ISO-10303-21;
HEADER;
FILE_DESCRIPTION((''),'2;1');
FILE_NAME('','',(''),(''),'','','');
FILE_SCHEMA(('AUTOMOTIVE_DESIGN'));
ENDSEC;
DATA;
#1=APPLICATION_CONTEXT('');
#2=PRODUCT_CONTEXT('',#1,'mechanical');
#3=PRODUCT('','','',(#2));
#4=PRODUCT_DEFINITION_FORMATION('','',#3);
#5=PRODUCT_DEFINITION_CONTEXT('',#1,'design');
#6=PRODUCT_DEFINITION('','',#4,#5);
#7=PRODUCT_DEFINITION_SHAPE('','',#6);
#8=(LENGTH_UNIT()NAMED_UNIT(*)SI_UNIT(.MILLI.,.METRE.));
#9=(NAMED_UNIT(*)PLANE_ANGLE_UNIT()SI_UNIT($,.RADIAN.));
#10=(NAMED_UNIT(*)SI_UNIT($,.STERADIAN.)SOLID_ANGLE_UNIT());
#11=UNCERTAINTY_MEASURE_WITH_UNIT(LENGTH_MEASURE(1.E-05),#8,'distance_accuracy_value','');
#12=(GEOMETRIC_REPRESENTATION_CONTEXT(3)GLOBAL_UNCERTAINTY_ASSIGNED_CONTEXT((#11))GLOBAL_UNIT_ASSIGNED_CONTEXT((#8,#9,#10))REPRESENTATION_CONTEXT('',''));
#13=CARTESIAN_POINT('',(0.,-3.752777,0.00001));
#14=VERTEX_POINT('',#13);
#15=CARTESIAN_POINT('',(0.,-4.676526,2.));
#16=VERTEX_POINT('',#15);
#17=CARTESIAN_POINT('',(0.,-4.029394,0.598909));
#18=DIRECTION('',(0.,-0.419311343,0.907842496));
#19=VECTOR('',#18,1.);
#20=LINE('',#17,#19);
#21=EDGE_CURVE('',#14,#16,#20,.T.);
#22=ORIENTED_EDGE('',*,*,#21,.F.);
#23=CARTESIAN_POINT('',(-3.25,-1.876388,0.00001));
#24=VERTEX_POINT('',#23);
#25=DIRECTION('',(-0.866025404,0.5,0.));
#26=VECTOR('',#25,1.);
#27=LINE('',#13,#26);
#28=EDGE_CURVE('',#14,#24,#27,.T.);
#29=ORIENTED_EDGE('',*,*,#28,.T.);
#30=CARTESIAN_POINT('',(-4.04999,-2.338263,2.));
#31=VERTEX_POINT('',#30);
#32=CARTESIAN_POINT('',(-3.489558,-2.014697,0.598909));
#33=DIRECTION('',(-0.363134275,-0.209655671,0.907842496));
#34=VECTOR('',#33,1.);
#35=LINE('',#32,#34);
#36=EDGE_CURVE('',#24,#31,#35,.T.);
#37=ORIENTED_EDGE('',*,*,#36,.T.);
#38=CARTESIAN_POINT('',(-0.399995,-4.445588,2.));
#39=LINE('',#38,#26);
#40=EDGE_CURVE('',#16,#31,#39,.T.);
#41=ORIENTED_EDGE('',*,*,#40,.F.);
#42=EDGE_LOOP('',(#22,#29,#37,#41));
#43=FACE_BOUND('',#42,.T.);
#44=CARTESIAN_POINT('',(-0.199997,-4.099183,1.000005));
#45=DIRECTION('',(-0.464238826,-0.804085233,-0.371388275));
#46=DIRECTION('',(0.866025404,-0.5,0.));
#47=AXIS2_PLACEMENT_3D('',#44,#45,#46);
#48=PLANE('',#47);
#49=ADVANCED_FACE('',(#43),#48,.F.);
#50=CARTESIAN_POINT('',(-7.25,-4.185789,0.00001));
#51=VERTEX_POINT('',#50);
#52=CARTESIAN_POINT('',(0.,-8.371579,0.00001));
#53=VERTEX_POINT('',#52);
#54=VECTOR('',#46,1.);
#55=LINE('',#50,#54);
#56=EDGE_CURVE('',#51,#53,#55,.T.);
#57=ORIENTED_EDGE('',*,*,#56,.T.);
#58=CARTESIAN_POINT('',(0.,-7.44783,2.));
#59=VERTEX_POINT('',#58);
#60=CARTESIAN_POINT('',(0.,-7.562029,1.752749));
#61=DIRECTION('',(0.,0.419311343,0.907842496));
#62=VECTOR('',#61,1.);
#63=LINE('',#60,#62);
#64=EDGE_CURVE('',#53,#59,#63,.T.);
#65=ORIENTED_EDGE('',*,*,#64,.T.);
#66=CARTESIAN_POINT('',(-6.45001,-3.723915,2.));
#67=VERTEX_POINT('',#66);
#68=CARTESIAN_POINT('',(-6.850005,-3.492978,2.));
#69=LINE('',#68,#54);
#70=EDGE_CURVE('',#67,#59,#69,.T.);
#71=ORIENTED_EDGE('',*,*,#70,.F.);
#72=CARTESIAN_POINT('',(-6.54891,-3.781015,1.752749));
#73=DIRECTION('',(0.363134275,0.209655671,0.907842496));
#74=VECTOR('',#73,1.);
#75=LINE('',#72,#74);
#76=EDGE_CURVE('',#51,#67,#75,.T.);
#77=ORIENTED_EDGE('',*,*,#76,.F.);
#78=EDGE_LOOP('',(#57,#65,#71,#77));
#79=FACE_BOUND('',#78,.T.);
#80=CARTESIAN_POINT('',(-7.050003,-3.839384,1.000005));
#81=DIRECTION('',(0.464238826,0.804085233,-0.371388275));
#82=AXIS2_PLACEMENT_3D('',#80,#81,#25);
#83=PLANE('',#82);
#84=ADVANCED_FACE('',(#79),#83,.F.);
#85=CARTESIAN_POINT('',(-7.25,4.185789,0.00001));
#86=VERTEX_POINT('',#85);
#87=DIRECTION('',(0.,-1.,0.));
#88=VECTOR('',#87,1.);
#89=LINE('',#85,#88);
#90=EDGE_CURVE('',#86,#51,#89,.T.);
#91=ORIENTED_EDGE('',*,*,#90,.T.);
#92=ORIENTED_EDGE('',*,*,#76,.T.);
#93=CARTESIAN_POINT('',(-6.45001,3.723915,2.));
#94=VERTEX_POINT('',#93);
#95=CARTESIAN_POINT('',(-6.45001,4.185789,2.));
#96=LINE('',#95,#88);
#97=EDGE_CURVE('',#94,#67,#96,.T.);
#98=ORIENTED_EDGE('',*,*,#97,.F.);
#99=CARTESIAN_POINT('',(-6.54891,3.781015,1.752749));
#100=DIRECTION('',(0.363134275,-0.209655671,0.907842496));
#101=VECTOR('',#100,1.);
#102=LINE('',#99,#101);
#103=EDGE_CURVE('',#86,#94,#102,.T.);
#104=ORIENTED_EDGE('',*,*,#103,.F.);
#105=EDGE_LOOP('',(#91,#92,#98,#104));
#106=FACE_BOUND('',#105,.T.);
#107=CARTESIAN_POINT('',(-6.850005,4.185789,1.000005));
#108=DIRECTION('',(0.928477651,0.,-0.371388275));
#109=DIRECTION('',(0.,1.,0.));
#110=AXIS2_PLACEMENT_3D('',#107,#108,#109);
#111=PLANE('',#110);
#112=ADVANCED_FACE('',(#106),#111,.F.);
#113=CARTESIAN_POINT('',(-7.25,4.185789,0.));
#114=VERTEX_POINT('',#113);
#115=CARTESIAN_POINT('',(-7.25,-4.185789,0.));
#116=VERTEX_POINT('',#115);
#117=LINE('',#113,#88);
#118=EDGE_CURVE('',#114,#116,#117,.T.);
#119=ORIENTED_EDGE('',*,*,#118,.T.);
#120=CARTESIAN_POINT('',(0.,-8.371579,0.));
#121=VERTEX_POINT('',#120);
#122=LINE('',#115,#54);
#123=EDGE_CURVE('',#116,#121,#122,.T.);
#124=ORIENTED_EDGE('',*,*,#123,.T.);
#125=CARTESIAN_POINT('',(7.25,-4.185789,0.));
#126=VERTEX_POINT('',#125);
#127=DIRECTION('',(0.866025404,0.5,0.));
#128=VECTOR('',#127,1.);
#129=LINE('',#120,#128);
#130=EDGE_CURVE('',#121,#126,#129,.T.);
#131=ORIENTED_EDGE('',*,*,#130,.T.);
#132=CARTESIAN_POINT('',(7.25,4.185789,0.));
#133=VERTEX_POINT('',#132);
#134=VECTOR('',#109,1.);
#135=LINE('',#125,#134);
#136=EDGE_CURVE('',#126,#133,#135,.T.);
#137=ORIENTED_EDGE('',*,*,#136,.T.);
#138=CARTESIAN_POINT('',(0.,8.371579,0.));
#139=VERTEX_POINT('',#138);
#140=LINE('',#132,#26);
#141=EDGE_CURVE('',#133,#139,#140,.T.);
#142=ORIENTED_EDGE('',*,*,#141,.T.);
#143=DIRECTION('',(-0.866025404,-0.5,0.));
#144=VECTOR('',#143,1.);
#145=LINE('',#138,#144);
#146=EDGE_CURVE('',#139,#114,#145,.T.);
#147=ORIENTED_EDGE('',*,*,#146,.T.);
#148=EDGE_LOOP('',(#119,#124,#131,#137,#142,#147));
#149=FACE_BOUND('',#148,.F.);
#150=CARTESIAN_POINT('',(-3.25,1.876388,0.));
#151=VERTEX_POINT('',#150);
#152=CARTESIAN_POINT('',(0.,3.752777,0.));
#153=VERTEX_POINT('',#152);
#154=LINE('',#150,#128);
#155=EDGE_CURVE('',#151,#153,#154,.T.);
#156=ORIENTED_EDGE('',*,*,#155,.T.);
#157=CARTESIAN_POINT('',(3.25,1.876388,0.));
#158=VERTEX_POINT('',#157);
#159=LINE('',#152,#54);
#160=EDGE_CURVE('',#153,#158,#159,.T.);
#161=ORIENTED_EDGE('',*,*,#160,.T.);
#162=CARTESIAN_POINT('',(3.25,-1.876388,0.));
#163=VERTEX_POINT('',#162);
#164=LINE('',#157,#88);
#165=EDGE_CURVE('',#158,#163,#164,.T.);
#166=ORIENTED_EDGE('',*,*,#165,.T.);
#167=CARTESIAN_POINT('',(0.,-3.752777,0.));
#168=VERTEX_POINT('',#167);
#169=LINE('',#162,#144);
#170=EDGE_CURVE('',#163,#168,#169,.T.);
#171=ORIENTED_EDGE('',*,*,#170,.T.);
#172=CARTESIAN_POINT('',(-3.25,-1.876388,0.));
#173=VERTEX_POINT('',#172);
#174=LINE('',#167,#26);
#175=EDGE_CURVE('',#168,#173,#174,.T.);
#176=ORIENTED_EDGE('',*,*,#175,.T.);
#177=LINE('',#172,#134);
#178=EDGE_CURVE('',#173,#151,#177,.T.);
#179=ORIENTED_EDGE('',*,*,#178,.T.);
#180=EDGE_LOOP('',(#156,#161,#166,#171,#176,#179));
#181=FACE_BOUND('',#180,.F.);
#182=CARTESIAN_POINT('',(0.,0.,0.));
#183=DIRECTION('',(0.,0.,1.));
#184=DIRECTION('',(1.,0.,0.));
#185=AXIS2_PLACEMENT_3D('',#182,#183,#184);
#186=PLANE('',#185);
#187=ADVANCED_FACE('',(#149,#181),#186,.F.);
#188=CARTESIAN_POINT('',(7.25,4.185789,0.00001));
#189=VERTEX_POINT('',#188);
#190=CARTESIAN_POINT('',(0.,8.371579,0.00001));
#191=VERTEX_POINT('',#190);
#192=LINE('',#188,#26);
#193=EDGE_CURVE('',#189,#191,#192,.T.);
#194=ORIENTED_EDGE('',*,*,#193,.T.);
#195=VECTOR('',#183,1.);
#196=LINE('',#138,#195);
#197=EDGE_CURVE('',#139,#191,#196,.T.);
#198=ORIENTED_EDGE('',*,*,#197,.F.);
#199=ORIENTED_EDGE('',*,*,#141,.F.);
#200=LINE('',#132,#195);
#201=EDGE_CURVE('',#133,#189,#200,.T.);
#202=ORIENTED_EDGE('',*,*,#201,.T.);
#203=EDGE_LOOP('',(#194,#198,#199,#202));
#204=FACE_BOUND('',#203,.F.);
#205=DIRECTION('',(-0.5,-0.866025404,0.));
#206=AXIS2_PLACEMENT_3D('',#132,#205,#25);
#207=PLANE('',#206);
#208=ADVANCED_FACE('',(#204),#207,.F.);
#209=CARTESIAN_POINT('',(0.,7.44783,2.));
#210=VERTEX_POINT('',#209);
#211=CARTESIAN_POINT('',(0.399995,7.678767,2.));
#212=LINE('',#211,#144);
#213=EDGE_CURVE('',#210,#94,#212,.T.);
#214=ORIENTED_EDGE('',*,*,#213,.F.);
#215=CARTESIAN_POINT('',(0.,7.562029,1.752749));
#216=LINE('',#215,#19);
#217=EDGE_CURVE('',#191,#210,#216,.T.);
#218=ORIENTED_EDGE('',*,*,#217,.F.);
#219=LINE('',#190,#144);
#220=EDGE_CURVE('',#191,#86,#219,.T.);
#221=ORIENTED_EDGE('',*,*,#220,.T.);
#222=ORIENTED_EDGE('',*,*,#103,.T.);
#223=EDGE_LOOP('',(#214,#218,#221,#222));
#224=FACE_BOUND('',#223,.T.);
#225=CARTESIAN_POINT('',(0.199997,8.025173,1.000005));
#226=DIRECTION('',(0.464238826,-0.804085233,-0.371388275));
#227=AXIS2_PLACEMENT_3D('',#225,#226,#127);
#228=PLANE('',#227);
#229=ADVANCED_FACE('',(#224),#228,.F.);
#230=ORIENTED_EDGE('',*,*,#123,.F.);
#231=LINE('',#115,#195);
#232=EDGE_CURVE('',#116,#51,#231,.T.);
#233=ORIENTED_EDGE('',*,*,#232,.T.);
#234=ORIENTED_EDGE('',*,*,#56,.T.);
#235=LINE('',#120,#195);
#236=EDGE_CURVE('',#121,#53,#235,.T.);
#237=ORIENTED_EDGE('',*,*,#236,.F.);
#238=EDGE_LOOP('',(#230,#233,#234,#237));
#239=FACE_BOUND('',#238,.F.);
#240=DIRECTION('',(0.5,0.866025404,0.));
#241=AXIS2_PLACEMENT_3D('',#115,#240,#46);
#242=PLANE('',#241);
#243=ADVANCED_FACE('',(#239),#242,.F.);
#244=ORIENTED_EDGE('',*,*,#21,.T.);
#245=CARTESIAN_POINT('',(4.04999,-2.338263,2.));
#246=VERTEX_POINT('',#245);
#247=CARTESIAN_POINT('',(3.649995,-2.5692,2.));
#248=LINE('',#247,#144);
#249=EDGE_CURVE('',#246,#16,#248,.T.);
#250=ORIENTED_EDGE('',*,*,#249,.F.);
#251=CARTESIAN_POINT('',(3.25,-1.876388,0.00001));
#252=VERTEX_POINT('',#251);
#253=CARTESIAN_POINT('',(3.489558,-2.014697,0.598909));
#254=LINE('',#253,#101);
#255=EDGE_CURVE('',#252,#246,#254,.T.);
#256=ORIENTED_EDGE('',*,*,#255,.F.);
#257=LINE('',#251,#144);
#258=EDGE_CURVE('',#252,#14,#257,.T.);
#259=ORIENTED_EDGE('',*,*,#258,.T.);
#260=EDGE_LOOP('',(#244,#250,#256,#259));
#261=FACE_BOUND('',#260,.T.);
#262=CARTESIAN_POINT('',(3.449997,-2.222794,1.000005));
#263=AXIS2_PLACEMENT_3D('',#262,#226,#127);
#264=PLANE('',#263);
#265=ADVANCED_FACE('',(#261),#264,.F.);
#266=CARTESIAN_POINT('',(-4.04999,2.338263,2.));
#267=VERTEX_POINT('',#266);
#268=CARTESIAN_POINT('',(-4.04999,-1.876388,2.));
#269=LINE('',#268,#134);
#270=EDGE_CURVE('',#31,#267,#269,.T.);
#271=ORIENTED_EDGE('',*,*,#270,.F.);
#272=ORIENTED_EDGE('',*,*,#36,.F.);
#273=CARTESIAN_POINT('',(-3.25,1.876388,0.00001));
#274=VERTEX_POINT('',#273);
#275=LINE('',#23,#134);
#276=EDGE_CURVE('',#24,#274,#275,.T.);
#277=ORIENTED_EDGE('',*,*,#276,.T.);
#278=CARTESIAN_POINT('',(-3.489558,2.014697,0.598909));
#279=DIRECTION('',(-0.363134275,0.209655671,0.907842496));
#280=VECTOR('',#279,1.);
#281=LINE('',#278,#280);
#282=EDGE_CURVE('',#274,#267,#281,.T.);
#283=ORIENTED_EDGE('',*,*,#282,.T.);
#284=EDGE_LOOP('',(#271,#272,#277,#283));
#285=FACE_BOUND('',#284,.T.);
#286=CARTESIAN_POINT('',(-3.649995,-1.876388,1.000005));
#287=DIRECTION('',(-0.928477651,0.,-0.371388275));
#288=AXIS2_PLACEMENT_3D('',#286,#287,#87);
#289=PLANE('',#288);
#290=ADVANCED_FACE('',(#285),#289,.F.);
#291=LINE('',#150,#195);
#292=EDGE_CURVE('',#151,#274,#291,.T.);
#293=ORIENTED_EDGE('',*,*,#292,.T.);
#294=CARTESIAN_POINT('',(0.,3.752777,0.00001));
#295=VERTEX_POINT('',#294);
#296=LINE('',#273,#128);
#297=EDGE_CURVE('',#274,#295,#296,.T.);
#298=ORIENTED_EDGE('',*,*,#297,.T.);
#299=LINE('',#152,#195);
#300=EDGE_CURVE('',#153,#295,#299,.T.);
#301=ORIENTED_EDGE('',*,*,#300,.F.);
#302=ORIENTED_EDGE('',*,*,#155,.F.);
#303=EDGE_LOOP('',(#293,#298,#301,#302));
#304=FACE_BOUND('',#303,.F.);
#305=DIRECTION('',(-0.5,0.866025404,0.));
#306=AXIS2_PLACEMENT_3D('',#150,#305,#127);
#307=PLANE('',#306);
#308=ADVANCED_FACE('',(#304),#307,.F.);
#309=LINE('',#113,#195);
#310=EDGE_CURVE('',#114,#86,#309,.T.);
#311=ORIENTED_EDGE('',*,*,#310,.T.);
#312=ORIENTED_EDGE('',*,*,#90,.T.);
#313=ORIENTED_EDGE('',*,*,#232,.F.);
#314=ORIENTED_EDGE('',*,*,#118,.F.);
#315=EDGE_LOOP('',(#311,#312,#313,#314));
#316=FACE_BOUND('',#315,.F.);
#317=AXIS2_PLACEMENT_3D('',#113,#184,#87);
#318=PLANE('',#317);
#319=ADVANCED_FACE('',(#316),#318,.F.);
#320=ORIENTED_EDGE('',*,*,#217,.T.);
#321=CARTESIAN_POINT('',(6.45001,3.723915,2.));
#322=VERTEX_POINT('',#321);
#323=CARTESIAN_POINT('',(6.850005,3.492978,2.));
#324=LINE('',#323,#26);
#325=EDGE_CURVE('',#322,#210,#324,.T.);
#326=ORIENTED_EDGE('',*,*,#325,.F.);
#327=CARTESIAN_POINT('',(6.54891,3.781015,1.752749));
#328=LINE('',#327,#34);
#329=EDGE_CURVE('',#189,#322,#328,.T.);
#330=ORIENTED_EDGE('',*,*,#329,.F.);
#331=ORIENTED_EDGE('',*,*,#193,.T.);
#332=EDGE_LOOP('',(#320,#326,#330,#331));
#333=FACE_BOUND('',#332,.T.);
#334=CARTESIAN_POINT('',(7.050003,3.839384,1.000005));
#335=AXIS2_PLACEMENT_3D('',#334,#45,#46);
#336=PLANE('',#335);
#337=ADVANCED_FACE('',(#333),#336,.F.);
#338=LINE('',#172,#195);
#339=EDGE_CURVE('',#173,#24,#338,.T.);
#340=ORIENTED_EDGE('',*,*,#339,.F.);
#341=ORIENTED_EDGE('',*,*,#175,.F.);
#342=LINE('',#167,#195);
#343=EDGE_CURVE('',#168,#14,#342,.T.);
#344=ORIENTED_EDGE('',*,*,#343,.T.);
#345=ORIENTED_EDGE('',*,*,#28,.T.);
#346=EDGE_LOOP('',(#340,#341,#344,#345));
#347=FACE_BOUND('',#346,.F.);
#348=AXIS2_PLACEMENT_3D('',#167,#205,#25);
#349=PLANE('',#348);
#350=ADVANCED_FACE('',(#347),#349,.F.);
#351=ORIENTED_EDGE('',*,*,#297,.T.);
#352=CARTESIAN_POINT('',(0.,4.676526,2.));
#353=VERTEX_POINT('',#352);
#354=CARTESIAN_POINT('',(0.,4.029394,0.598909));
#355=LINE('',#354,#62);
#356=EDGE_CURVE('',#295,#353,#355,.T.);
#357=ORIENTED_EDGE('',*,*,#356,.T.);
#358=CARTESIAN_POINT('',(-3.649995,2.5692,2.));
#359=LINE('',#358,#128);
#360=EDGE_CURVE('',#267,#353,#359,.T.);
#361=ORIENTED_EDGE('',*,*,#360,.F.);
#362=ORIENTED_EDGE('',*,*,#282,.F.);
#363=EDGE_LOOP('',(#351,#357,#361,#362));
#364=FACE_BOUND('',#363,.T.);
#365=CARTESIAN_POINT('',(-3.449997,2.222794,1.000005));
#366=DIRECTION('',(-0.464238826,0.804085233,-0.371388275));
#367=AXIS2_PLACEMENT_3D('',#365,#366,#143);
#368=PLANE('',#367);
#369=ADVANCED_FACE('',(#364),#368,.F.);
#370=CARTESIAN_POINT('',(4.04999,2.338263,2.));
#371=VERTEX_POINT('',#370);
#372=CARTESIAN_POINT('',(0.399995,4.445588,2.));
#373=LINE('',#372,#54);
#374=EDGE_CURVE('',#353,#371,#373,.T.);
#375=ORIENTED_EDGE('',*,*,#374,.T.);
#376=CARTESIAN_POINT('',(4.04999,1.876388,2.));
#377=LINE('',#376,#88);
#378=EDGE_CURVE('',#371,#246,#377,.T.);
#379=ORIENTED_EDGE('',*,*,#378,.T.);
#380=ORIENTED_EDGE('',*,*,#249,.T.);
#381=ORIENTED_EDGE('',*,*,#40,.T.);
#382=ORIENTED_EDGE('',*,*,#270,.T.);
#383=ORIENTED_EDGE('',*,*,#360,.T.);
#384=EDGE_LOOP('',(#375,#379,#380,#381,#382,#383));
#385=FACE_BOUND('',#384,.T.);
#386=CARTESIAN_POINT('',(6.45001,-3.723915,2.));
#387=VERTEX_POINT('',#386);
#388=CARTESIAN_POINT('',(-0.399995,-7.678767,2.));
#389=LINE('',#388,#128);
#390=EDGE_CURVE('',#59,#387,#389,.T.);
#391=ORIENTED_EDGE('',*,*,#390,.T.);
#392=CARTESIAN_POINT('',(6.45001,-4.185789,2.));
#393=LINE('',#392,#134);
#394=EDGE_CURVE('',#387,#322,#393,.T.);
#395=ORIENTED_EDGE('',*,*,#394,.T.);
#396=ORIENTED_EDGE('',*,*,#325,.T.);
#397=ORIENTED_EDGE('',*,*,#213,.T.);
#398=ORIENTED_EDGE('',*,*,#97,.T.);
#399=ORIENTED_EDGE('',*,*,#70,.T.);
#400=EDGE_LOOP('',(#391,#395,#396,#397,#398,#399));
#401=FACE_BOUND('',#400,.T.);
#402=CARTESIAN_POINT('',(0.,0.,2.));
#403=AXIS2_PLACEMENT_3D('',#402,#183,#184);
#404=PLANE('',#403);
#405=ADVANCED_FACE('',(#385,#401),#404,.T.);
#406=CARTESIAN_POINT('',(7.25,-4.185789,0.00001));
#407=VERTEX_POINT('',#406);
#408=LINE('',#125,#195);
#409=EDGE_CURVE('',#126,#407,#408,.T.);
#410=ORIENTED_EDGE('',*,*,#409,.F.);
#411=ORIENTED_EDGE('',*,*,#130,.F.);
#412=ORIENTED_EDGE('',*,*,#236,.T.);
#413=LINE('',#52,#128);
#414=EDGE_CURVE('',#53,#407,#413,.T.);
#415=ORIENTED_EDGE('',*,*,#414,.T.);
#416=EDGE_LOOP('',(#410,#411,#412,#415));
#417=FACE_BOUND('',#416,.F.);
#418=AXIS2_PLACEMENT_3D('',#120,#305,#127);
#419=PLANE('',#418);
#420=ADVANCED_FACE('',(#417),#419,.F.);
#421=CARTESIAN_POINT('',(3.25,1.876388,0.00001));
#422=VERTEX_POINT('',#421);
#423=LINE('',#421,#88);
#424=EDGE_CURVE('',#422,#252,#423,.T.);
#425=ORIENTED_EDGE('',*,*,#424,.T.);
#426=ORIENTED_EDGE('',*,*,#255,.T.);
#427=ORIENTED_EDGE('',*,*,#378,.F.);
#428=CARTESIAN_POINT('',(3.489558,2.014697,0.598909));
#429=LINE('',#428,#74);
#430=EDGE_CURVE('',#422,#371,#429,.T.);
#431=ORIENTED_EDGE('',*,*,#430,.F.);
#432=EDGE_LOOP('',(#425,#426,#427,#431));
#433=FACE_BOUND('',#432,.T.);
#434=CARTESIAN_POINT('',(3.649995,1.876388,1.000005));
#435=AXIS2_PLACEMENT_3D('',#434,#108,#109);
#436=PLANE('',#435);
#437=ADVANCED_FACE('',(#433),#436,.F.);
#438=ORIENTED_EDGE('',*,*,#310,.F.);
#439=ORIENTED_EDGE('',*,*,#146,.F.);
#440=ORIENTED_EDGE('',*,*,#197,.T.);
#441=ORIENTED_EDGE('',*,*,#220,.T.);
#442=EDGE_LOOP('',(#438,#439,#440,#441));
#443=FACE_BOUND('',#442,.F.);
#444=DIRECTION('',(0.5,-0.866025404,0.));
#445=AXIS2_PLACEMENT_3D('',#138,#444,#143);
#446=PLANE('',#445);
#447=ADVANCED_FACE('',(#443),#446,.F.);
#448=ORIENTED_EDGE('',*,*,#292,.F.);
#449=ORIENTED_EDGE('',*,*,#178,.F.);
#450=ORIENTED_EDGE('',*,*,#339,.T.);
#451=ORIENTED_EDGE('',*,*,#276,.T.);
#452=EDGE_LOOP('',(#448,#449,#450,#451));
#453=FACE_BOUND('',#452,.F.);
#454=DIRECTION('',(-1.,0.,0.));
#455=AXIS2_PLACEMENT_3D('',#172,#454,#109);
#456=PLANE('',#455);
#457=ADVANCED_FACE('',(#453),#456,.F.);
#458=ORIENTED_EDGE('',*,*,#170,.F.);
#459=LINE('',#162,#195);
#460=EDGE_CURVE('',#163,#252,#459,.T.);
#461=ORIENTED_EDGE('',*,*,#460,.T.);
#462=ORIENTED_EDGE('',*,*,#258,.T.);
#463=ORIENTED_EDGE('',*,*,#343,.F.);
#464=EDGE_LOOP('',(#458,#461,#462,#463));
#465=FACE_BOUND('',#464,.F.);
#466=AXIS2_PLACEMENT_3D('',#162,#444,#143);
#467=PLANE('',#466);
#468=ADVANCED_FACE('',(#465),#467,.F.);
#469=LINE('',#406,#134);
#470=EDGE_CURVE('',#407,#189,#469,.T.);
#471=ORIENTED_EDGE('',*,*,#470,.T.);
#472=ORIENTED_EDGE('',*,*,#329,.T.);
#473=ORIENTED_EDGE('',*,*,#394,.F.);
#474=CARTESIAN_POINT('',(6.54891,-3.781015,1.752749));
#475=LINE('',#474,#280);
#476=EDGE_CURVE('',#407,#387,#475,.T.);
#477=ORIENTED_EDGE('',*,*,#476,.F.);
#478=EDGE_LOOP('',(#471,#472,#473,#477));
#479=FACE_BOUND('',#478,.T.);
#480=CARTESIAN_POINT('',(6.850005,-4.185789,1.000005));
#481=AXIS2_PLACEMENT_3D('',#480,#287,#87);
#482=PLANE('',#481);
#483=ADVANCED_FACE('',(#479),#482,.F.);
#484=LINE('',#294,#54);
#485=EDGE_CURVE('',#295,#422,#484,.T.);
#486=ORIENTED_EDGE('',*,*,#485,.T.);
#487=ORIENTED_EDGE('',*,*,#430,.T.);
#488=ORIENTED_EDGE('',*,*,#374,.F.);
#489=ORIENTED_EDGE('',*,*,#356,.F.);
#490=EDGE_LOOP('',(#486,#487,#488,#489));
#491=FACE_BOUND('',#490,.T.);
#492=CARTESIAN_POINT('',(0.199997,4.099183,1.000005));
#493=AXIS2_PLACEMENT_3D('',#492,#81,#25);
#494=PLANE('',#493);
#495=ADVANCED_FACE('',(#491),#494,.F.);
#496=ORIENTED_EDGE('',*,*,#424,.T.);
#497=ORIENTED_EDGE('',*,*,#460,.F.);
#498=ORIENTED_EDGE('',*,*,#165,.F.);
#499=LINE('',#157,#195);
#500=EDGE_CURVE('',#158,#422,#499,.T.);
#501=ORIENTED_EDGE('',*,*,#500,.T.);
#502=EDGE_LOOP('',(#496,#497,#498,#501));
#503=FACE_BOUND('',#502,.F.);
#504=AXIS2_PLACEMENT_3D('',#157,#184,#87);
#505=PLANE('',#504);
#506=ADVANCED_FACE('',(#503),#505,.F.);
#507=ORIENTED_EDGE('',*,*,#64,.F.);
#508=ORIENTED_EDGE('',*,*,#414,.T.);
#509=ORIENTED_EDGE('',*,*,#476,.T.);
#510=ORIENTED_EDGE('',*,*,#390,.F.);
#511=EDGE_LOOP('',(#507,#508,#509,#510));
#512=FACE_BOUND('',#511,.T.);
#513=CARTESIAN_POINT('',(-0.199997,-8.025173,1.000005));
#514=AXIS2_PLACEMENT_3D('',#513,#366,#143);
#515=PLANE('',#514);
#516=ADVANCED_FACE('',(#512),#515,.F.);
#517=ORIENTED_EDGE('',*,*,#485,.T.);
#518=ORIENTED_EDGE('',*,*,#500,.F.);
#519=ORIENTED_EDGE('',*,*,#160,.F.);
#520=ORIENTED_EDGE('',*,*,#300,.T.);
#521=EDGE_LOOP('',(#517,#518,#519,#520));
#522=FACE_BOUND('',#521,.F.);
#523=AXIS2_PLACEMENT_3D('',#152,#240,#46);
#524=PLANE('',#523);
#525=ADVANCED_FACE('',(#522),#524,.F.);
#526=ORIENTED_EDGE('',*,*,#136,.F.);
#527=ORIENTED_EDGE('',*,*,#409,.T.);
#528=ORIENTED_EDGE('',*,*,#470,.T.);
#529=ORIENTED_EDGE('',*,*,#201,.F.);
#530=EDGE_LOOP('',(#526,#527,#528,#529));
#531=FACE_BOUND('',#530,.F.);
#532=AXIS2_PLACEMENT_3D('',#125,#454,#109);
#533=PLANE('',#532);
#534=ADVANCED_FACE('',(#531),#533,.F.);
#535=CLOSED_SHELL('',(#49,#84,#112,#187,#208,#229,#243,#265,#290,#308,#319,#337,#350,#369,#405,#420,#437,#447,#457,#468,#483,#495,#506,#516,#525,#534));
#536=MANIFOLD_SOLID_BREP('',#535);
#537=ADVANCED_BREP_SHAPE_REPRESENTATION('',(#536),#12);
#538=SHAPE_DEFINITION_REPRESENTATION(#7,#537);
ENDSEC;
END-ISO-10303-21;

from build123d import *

# Parameters (mm, degrees)
F1_DEPTH = 2
F2_SIZE2 = 0.79999
F2_SIZE  = 1.99999


# Not quite as in the source:
# - a fillet or chamfer is up to 0.001 mm smaller than in the source, because OpenCascade refuses the exact size


with BuildPart() as f1:
    # F0 (on Top) → F1 (new body)
    with BuildSketch(Plane.XY):
        Polygon((-7.25, 4.1857894516), (-7.25, -4.1857894516), (0, -8.3715789032), (7.25, -4.1857894516), (7.25, 4.1857894516), (0, 8.3715789032), align=None)
        Polygon((0, 3.7527767497), (3.25, 1.8763883749), (3.25, -1.8763883749), (0, -3.7527767497), (-3.25, -1.8763883749), (-3.25, 1.8763883749), align=None, mode=Mode.SUBTRACT)
    extrude(amount=F1_DEPTH)

    # F2 (size 2 and 0.8 in the source; OpenCascade refuses exactly that, so slightly less here)
    f2_edges = [f1.edges().sort_by_distance(p)[0] for p in [
        (-7.25, 0, 2),
        (-3.625, -6.278684, 2),
        (3.625, -6.278684, 2),
        (7.25, 0, 2),
        (3.625, 6.278684, 2),
        (-3.625, 6.278684, 2),
        (-3.25, 0, 2),
        (-1.625, 2.814583, 2),
        (1.625, 2.814583, 2),
        (3.25, 0, 2),
        (1.625, -2.814583, 2),
        (-1.625, -2.814583, 2),
    ]]
    chamfer(f2_edges, length=F2_SIZE, length2=F2_SIZE2)


solid = f1.part
